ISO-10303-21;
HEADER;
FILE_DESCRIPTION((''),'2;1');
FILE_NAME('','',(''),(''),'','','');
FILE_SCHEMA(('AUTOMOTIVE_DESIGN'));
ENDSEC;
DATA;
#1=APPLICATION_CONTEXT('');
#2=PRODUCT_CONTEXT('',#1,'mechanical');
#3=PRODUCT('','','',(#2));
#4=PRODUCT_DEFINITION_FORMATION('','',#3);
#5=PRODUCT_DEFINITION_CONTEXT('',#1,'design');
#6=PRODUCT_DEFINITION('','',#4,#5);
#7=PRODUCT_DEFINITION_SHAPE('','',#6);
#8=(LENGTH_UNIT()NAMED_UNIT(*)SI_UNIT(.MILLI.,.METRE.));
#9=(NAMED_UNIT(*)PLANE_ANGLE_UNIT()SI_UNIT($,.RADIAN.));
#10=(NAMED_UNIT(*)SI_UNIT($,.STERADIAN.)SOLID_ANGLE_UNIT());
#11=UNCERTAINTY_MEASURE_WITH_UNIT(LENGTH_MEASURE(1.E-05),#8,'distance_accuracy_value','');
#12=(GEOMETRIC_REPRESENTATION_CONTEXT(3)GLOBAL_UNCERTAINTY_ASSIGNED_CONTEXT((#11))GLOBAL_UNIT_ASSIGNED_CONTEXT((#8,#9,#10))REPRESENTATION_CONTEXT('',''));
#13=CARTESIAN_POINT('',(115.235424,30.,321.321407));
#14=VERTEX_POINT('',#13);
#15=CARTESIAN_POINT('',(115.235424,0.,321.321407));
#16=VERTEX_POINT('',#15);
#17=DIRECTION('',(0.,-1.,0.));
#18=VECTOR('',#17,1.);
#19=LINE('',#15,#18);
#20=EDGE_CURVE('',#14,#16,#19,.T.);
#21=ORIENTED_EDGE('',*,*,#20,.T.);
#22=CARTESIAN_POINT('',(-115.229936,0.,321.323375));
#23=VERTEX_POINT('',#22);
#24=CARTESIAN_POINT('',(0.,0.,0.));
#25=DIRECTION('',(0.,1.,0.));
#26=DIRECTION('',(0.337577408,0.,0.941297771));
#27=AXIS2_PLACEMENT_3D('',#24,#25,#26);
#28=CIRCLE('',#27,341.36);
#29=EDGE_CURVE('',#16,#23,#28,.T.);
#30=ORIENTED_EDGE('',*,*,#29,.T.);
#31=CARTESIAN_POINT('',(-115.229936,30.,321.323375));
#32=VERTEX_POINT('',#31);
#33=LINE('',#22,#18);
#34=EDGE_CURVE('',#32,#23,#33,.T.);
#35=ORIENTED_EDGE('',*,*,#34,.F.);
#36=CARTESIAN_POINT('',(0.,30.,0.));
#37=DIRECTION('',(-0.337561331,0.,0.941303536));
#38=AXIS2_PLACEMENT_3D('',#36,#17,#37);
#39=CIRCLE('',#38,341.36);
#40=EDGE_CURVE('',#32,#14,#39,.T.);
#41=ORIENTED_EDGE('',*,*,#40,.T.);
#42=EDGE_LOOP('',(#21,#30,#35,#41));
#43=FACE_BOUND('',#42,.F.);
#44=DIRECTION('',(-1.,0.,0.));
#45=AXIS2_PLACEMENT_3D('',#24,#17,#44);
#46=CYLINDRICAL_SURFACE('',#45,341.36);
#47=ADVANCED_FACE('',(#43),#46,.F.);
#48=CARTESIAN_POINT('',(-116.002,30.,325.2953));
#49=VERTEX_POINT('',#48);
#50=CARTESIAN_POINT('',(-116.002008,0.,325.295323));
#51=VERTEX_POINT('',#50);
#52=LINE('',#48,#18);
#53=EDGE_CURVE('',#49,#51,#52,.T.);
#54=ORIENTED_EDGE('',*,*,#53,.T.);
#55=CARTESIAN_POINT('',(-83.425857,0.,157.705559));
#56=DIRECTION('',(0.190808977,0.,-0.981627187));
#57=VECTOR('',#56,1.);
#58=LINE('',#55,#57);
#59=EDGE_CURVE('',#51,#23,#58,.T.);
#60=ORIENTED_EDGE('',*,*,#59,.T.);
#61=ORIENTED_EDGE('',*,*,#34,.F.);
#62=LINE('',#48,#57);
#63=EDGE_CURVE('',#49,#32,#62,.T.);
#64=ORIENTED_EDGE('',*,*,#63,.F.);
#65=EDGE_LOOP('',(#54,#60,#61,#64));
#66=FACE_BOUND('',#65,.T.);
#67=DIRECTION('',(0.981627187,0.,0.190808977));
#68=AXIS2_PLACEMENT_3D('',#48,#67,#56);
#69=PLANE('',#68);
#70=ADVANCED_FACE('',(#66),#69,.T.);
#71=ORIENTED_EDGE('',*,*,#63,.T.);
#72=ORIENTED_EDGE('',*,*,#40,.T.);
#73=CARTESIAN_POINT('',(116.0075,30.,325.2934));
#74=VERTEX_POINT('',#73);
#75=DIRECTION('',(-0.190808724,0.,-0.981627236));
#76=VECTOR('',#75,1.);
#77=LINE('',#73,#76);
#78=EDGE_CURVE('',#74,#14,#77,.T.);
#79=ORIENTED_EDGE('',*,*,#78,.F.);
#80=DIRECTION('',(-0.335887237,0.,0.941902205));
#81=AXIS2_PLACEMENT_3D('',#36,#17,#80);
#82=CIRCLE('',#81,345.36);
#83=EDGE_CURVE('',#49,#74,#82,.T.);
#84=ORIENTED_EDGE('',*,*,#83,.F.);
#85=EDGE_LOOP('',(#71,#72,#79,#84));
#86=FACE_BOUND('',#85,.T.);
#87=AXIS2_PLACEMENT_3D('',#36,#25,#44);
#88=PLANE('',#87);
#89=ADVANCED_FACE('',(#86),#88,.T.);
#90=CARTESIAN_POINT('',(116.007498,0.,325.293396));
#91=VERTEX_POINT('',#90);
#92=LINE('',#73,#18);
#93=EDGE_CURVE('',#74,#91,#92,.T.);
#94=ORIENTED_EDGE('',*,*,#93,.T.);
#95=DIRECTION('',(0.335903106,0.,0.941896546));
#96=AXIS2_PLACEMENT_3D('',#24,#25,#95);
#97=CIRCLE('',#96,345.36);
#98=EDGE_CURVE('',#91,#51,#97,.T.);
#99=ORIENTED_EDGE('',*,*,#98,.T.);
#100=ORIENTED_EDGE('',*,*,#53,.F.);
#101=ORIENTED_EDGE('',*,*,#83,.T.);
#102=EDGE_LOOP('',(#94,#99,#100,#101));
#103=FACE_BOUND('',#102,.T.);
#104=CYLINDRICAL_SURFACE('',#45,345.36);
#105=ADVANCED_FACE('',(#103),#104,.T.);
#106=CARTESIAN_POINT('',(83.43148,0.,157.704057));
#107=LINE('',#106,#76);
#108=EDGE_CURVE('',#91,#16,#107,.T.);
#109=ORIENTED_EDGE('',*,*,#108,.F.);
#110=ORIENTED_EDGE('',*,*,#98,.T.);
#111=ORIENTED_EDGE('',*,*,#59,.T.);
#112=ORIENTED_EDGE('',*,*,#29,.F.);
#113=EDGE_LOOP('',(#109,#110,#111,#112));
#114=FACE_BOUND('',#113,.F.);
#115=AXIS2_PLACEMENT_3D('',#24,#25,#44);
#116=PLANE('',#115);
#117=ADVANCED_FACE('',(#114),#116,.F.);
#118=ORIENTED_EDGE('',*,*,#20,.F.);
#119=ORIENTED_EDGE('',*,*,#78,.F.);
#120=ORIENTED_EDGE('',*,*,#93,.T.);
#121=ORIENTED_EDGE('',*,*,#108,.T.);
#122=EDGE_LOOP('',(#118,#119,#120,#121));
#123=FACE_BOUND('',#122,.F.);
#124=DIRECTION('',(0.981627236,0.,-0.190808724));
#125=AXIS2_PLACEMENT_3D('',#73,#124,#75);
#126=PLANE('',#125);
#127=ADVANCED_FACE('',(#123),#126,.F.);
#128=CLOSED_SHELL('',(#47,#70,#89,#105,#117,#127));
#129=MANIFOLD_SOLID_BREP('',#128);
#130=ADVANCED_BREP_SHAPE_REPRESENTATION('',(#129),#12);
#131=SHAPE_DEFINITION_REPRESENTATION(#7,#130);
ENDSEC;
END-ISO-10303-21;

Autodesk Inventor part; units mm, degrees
ref_plane "YZ Plane" through (0, 0, 0) normal (1, 0, 0) x (0, 1, 0)
ref_plane "XZ Plane" through (0, 0, 0) normal (0, 1, 0) x (-1, 0, 0)
ref_plane "XY Plane" through (0, 0, 0) normal (0, 0, 1) x (1, 0, 0)
sketch "Sketch1" plane through (0, 0, 0) normal (0, 1, 0) x (-1, 0, 0)
  circle A0 centre (0, 0) radius 341.36
  circle A1 centre (0, 0) radius 345.36
  dimension "d85" = 682.72
  dimension "d169" = 690.72
extrude "Extrusion3" add sketch "Sketch1" along normal blind 30
sketch "Sketch3" plane through (0, 30, 0) normal (0, 1, 0) x (1, 0, 0)
  arc A0 (-116.002, -325.2953) -> (116.0075, -325.2934) centre (0, 0) ccw
  arc A1 (-77.7244, -128.3741) -> (77.7297, -128.3709) centre (0, 0) ccw
  line L0 (-122.1811, -173.696) -> (-161.3589, -227.6196) construction
  line L1 (-116.002, -325.2953) -> (-77.7244, -128.3741)
  line L2 (0, 0) -> (0, -341.2918)
  line L3 (116.0075, -325.2934) -> (77.7297, -128.3709)
  line L4 (161.3912, -227.6651) -> (122.2055, -173.7307) construction
  dimension "d52" = 25
  dimension "d87" = 150.07
  dimension "d88" = 345.36
  dimension "d89" = 25
  dimension "d90" = 11
  dimension "d91" = 11
extrude "Extrusion5" cut sketch "Sketch3" against normal through all
equation "\"BendRadius\" = Thickness"
equation "\"BendReliefWidth\" = Thickness"
equation "\"BendReliefDepth\" = 0.5 * Thickness"
equation "\"CornerReliefSize\" = 4 * Thickness"
equation "\"MinimumRemnant\" = 2 * Thickness"
equation "\"TransitionRadius\" = BendRadius"
equation "\"JacobiRadiusSize\" = BendRadius"
equation "\"GapSize\" = Thickness"
equation "\"Thickness\" = 0.5"
properties part number "Banding Level A-C" material "Wood (Maple)"
